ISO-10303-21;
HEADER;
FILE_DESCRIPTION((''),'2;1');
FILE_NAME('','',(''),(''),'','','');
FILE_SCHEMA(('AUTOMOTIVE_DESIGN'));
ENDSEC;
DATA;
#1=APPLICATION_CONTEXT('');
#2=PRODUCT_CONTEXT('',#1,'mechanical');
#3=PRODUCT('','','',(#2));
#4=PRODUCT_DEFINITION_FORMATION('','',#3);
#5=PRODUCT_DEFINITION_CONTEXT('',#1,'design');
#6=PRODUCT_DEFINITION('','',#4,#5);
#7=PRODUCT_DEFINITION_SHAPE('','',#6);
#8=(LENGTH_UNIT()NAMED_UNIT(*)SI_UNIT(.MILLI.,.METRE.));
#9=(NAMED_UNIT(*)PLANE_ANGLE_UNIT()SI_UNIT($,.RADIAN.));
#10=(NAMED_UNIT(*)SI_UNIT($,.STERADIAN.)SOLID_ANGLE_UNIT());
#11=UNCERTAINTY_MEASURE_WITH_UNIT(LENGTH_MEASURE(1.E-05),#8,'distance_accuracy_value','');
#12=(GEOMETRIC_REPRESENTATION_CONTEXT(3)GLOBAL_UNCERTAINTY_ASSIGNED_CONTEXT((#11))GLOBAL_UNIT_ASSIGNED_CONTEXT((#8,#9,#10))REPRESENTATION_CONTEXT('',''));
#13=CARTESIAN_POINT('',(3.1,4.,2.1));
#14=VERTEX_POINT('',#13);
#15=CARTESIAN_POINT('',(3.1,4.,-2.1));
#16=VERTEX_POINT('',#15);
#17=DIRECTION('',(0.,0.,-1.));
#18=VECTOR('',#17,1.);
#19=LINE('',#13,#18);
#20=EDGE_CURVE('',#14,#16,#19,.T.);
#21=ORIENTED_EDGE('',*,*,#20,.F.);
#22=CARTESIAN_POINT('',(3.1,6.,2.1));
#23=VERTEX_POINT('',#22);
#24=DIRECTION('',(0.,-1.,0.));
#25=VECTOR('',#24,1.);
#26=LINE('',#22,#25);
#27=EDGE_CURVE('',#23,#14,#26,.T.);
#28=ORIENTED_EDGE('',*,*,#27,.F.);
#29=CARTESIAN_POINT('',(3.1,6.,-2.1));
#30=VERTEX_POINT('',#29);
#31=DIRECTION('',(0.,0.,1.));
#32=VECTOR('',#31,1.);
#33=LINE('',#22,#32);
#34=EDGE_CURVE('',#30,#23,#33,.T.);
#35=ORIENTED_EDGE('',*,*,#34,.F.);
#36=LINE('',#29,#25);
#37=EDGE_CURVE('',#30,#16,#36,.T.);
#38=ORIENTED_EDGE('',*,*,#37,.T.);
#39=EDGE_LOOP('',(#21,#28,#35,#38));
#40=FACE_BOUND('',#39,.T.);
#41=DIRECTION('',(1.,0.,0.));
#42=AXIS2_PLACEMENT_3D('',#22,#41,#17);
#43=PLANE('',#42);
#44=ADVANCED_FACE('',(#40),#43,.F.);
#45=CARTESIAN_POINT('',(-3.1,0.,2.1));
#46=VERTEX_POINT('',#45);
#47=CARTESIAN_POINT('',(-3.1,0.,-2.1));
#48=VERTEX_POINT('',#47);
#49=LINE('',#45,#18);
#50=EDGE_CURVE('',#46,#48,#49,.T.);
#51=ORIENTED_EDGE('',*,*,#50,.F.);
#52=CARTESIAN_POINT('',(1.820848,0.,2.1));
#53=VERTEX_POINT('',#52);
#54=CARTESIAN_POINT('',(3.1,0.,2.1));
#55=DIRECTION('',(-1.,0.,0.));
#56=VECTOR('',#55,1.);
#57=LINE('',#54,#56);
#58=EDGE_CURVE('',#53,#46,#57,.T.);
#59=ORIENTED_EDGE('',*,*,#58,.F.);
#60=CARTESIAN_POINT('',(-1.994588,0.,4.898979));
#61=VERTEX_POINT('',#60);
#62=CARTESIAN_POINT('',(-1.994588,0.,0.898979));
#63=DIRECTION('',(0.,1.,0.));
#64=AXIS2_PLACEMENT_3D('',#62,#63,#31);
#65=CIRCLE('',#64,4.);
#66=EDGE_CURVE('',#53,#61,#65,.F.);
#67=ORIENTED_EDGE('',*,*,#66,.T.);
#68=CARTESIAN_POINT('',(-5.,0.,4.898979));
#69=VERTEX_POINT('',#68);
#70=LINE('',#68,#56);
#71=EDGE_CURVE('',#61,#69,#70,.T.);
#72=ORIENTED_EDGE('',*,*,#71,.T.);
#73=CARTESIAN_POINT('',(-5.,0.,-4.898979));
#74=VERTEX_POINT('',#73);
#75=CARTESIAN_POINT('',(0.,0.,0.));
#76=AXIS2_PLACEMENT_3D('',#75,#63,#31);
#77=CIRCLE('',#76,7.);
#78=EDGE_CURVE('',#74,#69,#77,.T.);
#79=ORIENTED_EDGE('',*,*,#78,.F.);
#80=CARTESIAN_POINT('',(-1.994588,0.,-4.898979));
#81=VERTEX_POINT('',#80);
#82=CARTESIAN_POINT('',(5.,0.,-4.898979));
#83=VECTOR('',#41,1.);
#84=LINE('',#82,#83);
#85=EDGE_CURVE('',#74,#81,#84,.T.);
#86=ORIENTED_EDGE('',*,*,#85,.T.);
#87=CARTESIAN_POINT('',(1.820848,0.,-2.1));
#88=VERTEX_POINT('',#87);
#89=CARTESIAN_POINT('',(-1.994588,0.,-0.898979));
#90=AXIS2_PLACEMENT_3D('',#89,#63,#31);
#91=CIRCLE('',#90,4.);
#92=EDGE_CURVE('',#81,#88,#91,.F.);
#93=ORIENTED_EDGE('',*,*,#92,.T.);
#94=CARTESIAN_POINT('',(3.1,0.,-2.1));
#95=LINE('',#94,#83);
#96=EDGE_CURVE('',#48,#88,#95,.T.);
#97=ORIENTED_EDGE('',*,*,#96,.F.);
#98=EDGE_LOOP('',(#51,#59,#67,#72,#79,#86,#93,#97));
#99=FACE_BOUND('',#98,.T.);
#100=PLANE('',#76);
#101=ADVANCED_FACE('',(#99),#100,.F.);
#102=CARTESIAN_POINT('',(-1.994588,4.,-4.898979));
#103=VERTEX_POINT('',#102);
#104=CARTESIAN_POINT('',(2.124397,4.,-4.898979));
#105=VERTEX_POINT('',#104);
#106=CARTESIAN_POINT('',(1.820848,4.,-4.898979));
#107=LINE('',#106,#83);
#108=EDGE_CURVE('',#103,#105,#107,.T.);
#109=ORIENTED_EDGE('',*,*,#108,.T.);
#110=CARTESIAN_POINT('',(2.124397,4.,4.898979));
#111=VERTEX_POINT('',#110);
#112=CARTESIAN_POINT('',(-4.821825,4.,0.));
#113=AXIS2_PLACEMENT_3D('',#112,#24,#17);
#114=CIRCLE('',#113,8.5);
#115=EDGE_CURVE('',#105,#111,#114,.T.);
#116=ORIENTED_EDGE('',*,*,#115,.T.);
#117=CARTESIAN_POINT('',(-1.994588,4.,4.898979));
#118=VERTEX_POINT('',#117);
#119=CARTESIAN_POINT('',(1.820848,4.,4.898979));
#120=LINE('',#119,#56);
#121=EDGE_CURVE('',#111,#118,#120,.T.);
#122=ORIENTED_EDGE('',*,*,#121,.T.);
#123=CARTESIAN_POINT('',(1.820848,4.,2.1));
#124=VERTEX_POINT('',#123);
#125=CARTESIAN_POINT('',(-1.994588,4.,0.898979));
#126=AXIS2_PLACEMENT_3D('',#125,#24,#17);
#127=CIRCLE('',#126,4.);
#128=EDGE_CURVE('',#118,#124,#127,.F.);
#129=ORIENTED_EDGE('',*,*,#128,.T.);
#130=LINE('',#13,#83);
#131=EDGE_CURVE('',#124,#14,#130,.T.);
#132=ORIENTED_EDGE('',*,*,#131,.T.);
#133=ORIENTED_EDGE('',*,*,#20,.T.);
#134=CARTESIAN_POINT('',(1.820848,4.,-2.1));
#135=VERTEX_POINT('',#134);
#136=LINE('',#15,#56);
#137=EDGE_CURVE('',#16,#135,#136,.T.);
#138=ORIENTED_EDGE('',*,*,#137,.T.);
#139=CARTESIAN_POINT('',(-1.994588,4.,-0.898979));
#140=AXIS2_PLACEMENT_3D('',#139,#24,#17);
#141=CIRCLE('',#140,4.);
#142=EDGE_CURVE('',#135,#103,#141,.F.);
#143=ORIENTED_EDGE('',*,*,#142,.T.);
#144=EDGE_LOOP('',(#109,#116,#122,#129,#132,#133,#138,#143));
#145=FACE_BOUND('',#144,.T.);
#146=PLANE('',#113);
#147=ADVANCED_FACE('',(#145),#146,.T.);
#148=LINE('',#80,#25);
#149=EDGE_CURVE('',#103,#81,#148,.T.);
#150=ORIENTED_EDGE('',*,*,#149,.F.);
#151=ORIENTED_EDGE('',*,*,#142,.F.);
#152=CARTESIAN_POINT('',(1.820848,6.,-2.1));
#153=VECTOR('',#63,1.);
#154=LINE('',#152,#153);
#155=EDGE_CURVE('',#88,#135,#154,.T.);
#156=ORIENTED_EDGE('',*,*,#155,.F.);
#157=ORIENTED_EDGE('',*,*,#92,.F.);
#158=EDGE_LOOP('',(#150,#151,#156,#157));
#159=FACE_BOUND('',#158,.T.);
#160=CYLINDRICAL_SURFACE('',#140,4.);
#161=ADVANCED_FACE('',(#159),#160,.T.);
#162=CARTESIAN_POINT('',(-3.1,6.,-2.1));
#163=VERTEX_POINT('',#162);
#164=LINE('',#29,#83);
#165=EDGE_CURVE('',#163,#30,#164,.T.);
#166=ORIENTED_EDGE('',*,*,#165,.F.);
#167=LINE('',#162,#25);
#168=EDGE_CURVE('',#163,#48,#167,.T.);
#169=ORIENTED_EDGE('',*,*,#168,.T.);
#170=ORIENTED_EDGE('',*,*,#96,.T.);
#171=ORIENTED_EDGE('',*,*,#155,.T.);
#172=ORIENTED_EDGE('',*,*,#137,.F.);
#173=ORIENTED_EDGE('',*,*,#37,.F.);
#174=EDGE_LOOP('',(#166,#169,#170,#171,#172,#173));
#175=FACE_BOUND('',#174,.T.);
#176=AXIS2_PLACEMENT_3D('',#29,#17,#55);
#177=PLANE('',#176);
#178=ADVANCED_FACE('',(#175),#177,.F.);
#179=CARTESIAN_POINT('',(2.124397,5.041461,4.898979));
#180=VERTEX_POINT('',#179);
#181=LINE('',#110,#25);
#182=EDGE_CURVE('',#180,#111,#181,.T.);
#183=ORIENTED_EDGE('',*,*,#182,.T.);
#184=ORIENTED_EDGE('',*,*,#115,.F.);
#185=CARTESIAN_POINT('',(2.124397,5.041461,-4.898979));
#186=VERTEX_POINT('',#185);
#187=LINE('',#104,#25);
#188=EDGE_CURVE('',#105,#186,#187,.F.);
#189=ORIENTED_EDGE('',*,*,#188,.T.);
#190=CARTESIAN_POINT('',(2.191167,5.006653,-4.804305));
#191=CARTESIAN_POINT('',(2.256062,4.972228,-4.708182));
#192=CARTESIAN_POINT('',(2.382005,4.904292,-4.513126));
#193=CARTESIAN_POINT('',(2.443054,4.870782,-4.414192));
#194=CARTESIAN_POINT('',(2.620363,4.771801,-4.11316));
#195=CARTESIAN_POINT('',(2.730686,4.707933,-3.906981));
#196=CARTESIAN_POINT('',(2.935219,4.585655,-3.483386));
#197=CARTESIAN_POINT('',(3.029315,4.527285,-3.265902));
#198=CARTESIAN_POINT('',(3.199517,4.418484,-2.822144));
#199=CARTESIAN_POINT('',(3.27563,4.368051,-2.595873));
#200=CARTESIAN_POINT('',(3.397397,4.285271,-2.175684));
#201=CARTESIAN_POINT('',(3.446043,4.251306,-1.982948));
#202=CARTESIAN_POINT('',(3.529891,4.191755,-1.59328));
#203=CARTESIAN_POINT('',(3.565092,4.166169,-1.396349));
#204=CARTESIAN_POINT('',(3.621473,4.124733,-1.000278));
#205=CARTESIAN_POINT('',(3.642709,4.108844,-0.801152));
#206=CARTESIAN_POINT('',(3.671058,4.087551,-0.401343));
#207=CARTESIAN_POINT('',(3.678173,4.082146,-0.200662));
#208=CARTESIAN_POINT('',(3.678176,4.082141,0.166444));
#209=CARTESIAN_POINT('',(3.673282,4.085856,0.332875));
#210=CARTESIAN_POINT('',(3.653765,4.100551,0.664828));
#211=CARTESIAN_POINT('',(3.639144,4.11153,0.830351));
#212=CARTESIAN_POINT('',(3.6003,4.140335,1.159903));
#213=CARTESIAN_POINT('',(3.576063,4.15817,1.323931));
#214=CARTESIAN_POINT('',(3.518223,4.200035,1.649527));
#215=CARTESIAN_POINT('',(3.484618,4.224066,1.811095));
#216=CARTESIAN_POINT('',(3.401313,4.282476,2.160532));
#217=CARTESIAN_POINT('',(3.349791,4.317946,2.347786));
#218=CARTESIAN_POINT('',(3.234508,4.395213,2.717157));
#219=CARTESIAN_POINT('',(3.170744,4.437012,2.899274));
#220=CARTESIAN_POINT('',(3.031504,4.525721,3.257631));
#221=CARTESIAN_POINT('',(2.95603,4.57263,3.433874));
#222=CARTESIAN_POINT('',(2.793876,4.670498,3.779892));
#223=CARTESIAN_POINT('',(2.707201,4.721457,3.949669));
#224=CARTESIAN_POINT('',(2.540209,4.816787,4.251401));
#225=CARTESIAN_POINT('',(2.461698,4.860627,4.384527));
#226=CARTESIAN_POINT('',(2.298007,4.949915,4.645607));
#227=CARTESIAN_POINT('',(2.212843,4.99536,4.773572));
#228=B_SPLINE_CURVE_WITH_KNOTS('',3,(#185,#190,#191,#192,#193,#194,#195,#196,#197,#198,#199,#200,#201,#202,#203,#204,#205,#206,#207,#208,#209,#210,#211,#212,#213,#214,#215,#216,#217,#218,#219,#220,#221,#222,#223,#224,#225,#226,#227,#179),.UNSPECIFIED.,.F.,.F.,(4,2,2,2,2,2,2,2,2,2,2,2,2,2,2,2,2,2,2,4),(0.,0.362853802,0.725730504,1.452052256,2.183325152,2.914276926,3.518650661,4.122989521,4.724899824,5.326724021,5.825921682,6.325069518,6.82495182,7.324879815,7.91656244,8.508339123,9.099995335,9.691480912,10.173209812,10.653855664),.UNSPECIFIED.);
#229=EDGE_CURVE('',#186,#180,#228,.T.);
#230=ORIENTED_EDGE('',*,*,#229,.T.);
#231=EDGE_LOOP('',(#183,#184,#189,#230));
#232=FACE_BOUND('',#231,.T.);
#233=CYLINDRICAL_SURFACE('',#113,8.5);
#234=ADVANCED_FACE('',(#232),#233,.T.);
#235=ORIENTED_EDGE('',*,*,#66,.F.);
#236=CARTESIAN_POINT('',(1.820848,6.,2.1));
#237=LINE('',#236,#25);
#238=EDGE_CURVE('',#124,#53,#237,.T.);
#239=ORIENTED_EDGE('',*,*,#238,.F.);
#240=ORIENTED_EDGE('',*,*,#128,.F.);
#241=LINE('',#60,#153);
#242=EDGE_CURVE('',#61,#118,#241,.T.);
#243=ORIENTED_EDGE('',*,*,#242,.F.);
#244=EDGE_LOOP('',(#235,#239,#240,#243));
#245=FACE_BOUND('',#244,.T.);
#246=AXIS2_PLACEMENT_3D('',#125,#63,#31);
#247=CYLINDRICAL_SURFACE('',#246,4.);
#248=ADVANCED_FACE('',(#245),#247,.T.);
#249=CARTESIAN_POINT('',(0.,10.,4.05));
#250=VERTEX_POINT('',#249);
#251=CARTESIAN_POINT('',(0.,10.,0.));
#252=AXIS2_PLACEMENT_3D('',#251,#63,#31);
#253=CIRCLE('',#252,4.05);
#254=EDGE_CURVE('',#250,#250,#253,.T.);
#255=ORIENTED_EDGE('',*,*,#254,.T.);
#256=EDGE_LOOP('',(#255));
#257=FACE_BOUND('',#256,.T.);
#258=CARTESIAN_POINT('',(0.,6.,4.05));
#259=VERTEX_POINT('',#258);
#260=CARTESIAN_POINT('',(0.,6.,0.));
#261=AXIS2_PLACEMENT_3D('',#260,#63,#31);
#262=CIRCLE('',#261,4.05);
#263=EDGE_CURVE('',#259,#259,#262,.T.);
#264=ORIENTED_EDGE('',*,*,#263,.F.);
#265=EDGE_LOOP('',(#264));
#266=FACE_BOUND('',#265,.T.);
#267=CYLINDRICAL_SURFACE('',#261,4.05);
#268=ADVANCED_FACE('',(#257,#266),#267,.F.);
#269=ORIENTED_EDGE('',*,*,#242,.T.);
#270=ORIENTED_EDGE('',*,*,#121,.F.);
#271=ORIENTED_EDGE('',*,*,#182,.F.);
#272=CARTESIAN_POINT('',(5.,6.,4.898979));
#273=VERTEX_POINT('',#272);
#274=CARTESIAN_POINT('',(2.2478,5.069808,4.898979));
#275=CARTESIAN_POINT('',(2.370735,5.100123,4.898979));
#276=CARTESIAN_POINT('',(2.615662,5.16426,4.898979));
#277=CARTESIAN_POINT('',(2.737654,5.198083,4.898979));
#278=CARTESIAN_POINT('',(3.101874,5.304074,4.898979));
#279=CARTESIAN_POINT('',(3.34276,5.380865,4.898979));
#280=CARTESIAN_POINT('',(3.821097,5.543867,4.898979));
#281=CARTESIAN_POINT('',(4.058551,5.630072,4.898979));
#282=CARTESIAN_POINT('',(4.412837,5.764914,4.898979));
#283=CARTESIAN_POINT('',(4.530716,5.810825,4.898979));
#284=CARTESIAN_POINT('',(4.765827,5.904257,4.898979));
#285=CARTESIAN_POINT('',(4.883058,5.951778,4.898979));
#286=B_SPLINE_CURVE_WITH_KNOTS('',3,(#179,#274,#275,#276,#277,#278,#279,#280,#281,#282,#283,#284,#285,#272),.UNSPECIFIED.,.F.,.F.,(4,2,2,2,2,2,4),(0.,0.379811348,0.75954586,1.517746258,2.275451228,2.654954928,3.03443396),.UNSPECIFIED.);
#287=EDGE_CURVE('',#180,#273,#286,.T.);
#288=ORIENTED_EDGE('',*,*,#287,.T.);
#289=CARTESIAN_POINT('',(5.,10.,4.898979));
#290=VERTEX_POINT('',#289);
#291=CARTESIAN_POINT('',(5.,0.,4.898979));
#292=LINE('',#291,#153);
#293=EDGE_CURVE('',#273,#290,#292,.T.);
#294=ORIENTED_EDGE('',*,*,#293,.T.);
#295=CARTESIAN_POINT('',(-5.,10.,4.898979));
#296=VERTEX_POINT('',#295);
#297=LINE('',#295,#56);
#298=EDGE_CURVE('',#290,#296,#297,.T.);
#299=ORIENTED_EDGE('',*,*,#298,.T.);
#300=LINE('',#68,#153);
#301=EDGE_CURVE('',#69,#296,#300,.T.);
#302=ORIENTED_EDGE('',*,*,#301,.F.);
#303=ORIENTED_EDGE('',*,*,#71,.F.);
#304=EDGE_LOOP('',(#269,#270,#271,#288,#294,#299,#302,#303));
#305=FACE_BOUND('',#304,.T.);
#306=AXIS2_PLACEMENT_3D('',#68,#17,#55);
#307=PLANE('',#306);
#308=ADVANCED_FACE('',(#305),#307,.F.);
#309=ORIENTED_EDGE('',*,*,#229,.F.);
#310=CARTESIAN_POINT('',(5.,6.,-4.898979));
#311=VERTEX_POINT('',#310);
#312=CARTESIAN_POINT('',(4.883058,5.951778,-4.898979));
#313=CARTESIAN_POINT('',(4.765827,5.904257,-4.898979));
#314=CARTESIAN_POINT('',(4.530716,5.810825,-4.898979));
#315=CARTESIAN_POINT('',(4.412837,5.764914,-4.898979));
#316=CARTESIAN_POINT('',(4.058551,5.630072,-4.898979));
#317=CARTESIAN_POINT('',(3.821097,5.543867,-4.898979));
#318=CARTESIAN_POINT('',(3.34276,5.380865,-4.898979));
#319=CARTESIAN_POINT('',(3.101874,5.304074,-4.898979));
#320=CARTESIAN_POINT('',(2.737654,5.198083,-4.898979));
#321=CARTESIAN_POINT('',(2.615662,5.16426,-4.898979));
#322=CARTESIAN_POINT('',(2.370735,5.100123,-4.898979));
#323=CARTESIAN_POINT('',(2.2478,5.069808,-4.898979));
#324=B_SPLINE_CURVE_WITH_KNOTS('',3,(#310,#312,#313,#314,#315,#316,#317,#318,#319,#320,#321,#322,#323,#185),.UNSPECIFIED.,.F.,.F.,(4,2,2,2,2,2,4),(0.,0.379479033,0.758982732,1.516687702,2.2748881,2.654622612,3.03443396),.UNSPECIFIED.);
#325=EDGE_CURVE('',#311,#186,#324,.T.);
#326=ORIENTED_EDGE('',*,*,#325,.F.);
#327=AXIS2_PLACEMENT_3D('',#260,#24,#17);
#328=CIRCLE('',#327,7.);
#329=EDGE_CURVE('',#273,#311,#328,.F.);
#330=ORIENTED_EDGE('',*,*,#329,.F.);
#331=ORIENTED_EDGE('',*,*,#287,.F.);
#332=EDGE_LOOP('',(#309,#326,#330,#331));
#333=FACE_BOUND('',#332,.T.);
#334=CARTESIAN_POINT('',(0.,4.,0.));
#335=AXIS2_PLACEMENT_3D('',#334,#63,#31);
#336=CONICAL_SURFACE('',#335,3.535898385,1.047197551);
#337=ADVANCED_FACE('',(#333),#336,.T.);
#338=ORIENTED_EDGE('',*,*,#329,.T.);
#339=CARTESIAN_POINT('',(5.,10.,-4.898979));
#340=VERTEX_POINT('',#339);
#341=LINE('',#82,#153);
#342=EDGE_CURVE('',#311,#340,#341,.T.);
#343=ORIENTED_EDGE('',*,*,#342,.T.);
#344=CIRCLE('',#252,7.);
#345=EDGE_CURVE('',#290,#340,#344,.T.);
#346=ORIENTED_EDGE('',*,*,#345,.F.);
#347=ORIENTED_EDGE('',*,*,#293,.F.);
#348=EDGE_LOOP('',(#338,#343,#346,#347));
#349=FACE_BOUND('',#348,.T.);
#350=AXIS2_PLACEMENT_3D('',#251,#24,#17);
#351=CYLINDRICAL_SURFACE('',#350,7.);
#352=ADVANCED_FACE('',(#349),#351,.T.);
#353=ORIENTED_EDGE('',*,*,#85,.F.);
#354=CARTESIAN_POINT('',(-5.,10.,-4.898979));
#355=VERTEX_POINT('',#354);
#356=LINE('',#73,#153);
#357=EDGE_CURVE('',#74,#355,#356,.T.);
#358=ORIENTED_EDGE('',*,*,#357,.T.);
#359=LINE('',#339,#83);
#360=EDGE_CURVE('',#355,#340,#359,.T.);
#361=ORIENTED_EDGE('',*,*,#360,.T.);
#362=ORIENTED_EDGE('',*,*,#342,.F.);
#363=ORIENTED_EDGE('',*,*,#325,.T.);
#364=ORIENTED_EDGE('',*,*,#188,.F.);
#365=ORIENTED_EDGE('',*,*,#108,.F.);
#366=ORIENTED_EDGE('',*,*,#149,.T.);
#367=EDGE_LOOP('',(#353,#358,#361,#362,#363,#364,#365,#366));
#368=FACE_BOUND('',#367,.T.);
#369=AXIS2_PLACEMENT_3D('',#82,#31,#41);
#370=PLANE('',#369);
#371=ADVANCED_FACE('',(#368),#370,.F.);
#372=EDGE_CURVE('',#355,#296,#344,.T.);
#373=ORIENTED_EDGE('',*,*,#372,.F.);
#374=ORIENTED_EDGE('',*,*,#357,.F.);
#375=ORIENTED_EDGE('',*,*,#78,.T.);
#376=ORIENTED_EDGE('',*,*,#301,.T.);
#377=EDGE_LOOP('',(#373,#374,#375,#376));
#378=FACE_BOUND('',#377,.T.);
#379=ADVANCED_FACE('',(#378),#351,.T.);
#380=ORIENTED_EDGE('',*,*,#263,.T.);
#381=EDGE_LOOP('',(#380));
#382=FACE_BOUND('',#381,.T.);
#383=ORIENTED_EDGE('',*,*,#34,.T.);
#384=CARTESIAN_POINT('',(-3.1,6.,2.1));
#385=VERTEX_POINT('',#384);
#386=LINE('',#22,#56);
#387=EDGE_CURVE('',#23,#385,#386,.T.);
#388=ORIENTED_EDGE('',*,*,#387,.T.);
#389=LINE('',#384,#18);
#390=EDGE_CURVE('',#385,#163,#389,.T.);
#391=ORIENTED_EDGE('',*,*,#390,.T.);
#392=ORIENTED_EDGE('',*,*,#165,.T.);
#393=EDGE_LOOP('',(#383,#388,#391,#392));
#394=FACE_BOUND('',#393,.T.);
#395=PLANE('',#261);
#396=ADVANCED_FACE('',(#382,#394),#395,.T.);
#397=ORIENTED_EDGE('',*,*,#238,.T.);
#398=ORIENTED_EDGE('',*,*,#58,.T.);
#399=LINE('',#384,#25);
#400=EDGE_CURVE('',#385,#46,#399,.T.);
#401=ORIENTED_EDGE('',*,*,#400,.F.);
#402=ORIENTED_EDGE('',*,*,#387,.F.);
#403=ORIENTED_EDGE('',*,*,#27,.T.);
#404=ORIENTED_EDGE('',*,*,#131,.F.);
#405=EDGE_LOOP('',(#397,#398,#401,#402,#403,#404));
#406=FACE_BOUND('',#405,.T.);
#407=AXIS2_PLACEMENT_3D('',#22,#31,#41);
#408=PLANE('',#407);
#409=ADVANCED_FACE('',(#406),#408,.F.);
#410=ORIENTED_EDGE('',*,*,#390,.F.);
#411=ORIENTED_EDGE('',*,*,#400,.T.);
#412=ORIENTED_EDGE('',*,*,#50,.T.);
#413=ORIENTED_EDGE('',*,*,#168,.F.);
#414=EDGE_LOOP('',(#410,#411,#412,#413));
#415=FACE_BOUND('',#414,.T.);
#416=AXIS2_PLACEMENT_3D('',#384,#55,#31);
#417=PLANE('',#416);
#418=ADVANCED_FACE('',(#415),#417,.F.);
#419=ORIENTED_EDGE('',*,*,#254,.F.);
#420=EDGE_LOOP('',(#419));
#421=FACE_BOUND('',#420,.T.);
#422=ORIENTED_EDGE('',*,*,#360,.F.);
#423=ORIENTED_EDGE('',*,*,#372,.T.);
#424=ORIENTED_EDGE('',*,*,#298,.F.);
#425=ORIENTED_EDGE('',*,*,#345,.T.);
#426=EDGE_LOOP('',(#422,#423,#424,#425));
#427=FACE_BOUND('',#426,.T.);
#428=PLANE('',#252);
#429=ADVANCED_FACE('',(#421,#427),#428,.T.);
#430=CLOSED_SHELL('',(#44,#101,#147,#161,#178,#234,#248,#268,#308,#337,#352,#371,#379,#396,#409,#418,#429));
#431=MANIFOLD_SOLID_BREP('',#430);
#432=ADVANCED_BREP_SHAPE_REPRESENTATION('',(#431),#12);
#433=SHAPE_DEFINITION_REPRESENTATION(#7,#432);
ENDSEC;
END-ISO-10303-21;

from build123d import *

# Parameters (mm, degrees)
SKETCH1_R           = 7
BOSS_EXTRUDE3_DEPTH = 10
SKETCH4_R           = 4.05
CUT_EXTRUDE1_DEPTH  = 4
SKETCH5_W           = 6.2
SKETCH5_H           = 4.2
CUT_EXTRUDE2_DEPTH  = 6
CUT_EXTRUDE3_DEPTH  = 4
CUT_EXTRUDE4_DEPTH  = 15.071247279
CHAMFER1_SIZE       = 2
CHAMFER1_SIZE_2     = 3.464101615
CUT_EXTRUDE5_DEPTH  = 4
FILLET1_R           = 4


with BuildPart() as part:
    # Sketch1 → Boss-Extrude3 (new body)
    with BuildSketch(Plane(origin=(0, 0, 0), x_dir=(1, 0, 0), z_dir=(0, 1, 0))):
        with Locations(Location((0, 0, 0), (0, 0, 270))):
            Circle(SKETCH1_R)
    extrude(amount=BOSS_EXTRUDE3_DEPTH)

    # Sketch4 → Cut-Extrude1 (cut)
    with BuildSketch(Plane(origin=(0, 10, 0), x_dir=(1, 0, 0), z_dir=(0, 1, 0))):
        with Locations(Location((0, 0, 0), (0, 0, 270))):
            Circle(SKETCH4_R)
    extrude(amount=-CUT_EXTRUDE1_DEPTH, mode=Mode.SUBTRACT)

    # Sketch5 → Cut-Extrude2 (cut)
    with BuildSketch(Plane.XZ):
        Rectangle(SKETCH5_W, SKETCH5_H)
    extrude(amount=-CUT_EXTRUDE2_DEPTH, mode=Mode.SUBTRACT)

    # Sketch6 → Cut-Extrude3 (cut)
    with BuildSketch(Plane.XZ):
        with BuildLine():
            ThreePointArc((0, -7), (7, 0), (0, 7))
            ThreePointArc((0, 7), (3.67817462, 0), (0, -7))
        make_face()
    extrude(amount=-CUT_EXTRUDE3_DEPTH, mode=Mode.SUBTRACT)

    # Sketch7 → Cut-Extrude4 (cut, through all)
    with BuildSketch(Plane(origin=(0, 10, 0), x_dir=(1, 0, 0), z_dir=(0, 1, 0))):
        with BuildLine():
            Line((-5, -4.898979486), (5, -4.898979486))
            ThreePointArc((5, -4.898979486), (0, -7), (-5, -4.898979486))
        make_face()
        with BuildLine():
            Line((5, 4.898979486), (-5, 4.898979486))
            ThreePointArc((-5, 4.898979486), (0, 16.797958971), (5, 4.898979486))
        make_face()
    extrude(amount=-CUT_EXTRUDE4_DEPTH, mode=Mode.SUBTRACT)

    # Chamfer1
    # the kernel refuses this chamfer: 3.464101615, 2 mm, written as the material it takes off along each edge
    with BuildSketch(Plane(origin=(0, 4, 0), x_dir=(-0.4663618278566538, 0, -0.8845940569087047), z_dir=(-0.8845940569087047, 0, 0.4663618278566538))) as chamfer1_piece_1_section:
        Polygon((7, -CHAMFER1_SIZE), (7 - CHAMFER1_SIZE_2, 0), (7, 0), align=None)
    chamfer1_piece_1 = revolve(axis=Axis((0, 4, 0), (0, -1, 0)), revolution_arc=235.596785732, mode=Mode.PRIVATE)
    chamfer1_piece_1 = chamfer1_piece_1 - Plane(origin=(-4.82182538, 5.041782237, 0), x_dir=(0.5672735741760563, 0, 0.8235294117647058), z_dir=(0, -1, 0)) * Cylinder(8.5, 29, mode=Mode.PRIVATE)
    add(chamfer1_piece_1, mode=Mode.SUBTRACT)

    # Sketch10 → Cut-Extrude5 (cut)
    with BuildSketch(Plane.XZ):
        with BuildLine():
            Line((1.820847698, -4.898979486), (1.820847698, 4.898979486))
            Line((1.820847698, 4.898979486), (2.124396614, 4.898979486))
            ThreePointArc((2.124396614, 4.898979486), (3.67817462, 0), (2.124396614, -4.898979486))
            Line((2.124396614, -4.898979486), (1.820847698, -4.898979486))
        make_face()
    extrude(amount=-CUT_EXTRUDE5_DEPTH, mode=Mode.SUBTRACT)

    # Fillet1
    # the kernel refuses this fillet: 4 mm, written as the material it takes off along each edge
    with BuildSketch(Plane(origin=(1.820847698, -9.538589297, 4.898979486), x_dir=(-1, 0, 0), z_dir=(0, 1, 0))) as fillet1_piece_1:
        with BuildLine():
            CenterArc((3.815435719, -4), FILLET1_R, 90, 72.527072621)
            Line((0, -2.798979486), (0, 0))
            Line((0, 0), (3.815435719, 0))
        make_face()
    extrude(amount=13.538589297, mode=Mode.SUBTRACT)
    with BuildSketch(Plane(origin=(1.820847698, -9.538589297, -4.898979486), x_dir=(-1, 0, 0), z_dir=(0, 1, 0))) as fillet1_piece_2:
        with BuildLine():
            CenterArc((3.815435719, 4), FILLET1_R, 197.472927379, 72.527072621)
            Line((0, 2.798979486), (0, 0))
            Line((0, 0), (3.815435719, 0))
        make_face()
    extrude(amount=13.538589297, mode=Mode.SUBTRACT)


solid = part.part
